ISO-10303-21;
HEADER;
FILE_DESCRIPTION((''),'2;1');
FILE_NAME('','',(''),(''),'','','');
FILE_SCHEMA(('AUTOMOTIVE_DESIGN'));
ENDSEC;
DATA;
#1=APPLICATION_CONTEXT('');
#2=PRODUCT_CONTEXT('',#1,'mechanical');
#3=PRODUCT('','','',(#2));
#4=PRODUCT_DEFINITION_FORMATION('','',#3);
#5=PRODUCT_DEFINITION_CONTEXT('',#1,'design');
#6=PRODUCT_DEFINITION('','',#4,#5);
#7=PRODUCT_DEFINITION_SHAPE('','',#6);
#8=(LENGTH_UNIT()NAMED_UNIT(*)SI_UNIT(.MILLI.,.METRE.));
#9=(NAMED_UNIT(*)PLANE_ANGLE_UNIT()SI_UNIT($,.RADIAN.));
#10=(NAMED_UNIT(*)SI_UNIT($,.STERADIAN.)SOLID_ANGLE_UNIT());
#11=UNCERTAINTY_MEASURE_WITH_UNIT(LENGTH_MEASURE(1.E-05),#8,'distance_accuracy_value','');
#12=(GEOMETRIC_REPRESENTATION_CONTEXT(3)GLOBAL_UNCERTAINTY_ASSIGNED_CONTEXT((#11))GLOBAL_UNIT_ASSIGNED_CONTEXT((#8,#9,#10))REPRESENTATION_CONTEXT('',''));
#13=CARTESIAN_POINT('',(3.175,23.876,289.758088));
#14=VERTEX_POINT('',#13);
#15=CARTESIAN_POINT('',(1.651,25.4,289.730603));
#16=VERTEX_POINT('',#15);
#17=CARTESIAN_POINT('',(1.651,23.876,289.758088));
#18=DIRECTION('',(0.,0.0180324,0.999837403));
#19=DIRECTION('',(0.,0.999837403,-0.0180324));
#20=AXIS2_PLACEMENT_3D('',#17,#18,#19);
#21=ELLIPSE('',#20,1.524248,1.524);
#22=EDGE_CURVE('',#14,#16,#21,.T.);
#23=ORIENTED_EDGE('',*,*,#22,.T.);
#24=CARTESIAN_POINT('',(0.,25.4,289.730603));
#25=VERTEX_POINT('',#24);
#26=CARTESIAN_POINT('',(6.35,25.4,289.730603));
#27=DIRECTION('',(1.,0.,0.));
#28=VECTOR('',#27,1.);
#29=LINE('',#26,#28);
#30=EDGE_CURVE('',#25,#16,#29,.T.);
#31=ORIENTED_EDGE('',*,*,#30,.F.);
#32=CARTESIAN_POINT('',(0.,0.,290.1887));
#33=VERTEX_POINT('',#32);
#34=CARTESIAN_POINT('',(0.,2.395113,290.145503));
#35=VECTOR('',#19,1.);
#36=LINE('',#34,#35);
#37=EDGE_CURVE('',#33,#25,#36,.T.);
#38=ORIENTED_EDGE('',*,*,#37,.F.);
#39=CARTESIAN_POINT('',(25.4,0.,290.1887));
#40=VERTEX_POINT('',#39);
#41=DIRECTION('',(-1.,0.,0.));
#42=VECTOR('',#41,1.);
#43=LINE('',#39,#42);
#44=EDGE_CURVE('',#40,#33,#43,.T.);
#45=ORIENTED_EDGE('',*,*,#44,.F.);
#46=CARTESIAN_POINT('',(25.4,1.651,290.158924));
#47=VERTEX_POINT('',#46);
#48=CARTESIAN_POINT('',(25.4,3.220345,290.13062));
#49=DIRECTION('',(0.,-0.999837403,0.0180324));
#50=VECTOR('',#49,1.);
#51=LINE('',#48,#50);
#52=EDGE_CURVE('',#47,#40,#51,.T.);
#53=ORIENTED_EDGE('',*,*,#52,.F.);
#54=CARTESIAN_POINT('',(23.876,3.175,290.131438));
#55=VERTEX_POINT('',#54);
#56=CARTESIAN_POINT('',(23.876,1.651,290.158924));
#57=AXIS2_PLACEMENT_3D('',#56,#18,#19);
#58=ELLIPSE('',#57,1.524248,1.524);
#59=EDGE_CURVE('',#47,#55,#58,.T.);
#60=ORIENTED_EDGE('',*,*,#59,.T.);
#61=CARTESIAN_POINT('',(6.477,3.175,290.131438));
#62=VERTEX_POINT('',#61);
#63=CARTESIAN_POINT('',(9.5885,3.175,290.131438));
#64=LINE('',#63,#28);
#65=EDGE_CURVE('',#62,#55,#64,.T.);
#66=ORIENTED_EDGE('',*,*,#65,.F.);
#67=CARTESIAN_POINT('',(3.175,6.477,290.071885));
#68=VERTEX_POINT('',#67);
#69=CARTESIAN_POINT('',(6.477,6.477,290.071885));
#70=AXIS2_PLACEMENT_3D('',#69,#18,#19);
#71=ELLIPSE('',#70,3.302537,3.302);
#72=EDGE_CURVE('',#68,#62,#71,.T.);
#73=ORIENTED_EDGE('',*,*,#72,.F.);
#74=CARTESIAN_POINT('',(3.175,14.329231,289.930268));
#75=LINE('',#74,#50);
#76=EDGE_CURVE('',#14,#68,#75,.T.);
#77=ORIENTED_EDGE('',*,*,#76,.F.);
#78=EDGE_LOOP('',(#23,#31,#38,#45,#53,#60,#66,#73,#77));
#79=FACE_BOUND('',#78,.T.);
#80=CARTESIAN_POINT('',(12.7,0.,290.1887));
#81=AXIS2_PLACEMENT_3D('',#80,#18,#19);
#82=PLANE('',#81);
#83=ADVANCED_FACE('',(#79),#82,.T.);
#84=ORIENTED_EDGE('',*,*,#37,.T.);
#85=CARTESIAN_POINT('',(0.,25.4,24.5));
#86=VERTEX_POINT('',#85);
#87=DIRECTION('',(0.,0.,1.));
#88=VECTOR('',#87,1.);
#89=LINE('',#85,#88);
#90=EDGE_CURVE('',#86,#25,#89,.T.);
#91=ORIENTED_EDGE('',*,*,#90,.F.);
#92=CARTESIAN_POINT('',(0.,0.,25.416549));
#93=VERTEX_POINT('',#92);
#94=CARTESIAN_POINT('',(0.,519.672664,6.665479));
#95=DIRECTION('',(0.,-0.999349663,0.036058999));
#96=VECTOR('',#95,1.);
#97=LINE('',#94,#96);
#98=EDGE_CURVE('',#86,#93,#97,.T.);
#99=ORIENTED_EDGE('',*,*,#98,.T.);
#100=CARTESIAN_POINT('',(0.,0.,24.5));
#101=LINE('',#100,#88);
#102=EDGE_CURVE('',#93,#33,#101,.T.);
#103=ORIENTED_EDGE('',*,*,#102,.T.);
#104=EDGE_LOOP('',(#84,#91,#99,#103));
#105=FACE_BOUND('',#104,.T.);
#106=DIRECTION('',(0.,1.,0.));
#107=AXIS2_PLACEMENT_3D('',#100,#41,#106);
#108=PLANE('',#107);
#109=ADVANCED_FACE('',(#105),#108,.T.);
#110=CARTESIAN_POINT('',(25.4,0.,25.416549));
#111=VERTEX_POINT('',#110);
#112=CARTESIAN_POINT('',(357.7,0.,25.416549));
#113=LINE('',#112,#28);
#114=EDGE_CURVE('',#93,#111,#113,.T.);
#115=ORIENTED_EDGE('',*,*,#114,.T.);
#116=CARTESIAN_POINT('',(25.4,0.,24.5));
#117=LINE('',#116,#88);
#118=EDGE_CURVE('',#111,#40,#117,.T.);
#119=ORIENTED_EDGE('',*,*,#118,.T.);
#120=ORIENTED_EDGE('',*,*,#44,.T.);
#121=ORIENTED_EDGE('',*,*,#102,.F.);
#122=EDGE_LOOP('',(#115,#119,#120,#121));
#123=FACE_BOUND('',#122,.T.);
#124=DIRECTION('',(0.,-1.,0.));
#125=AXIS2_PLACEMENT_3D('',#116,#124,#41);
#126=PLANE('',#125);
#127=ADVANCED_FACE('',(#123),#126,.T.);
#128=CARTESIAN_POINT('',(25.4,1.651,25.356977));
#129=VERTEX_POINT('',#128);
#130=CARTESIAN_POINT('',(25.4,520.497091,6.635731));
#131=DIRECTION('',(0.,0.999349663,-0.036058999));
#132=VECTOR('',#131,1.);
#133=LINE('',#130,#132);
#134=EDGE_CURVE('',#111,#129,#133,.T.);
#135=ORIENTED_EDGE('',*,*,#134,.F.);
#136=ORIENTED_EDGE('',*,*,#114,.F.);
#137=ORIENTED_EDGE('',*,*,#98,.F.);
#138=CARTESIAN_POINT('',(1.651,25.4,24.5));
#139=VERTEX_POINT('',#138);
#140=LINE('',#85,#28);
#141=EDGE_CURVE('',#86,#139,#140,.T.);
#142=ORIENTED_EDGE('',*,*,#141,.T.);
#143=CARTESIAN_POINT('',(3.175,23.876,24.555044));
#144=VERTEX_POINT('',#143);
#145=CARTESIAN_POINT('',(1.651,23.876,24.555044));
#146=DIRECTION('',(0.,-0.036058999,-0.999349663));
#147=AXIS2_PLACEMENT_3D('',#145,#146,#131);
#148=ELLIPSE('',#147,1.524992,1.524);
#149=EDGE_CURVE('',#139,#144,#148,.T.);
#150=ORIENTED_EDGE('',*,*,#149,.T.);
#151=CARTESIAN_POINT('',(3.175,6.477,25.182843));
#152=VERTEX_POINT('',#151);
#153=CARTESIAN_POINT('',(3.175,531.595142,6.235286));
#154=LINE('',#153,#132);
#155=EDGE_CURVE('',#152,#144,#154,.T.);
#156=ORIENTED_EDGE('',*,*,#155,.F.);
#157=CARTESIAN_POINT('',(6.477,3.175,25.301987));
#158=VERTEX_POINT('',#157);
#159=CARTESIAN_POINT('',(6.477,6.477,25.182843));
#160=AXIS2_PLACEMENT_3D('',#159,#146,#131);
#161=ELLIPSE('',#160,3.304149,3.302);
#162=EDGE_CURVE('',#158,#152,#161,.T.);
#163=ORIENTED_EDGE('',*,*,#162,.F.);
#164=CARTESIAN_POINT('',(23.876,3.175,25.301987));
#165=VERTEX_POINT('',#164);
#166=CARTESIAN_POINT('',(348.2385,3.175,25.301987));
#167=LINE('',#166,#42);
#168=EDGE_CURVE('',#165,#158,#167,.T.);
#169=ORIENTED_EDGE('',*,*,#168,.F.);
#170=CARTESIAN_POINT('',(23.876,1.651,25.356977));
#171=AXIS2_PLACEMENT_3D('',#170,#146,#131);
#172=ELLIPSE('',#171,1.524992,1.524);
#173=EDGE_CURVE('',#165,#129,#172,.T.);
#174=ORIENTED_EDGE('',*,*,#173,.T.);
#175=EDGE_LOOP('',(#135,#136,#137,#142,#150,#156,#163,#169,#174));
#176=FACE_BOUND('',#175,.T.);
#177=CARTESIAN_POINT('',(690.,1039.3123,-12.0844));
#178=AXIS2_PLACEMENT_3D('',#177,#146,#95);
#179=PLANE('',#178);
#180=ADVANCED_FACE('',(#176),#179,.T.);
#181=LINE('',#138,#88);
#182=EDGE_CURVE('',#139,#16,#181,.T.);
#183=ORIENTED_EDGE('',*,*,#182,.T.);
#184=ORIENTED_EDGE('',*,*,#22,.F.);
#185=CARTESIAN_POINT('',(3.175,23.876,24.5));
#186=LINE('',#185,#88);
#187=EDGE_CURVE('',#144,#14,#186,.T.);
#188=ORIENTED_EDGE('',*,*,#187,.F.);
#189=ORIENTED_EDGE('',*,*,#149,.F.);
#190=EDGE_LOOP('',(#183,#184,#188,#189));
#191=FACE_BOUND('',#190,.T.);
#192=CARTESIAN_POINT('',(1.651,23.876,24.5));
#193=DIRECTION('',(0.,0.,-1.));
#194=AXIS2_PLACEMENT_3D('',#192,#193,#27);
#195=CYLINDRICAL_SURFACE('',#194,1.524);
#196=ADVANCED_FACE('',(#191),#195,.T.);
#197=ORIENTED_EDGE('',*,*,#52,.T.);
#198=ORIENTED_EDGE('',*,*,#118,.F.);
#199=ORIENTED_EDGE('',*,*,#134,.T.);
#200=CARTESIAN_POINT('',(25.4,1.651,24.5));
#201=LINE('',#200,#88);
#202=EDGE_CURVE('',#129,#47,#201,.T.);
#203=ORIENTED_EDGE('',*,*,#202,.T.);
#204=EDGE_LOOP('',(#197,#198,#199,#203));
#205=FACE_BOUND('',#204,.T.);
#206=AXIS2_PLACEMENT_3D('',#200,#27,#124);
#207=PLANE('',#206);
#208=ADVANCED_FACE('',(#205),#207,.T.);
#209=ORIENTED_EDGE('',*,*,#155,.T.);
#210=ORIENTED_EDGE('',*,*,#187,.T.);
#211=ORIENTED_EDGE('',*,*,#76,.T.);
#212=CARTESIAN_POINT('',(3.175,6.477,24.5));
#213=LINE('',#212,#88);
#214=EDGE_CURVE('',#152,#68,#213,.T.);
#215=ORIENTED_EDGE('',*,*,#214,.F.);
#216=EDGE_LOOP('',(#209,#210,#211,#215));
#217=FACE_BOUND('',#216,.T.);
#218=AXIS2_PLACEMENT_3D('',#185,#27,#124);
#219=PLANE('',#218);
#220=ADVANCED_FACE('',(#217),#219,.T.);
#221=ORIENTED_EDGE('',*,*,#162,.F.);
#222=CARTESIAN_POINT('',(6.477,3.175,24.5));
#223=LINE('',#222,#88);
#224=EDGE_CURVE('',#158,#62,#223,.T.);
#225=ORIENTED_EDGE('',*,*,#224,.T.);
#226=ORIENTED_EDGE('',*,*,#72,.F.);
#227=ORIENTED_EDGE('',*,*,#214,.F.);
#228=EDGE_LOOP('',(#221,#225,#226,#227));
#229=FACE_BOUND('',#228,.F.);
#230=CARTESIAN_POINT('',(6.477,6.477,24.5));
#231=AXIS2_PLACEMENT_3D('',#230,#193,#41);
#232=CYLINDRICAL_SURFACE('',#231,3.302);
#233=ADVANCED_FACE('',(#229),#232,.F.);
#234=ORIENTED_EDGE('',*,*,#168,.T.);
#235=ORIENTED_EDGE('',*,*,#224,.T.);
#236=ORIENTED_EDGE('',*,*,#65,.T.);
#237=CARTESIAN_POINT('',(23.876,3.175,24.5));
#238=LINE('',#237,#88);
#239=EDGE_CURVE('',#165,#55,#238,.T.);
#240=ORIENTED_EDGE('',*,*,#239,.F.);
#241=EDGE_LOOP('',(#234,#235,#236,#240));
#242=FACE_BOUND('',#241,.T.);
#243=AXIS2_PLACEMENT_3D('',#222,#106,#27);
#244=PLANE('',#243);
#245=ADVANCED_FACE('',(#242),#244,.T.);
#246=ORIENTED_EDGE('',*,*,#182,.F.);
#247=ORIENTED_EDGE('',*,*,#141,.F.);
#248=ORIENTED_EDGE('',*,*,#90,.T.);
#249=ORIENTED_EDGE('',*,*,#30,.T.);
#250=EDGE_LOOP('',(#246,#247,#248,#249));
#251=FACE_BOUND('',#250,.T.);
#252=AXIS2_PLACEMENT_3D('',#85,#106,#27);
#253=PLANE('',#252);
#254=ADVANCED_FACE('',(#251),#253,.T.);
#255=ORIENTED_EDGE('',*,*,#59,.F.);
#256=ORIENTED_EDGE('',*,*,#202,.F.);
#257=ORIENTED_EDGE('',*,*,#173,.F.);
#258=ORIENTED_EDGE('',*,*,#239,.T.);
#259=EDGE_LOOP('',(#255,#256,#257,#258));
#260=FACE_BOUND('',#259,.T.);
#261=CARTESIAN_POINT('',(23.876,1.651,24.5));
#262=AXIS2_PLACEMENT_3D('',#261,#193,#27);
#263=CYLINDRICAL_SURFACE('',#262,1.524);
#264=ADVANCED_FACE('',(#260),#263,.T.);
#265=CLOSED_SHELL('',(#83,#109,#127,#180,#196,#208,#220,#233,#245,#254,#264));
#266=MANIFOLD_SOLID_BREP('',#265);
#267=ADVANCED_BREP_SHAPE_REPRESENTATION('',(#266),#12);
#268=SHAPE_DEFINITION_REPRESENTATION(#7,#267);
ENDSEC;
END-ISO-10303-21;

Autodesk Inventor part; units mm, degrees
ref_plane "Start Plane" through (0, 0, 24.5) normal (0, 0, 1) x (1, 0, 0)
ref_plane "End Plane" through (0, 0, 290.1887) normal (0, 0, 1) x (1, 0, 0)
sketch "Sketch" plane through (0, 0, 0) normal (0, 0, 1) x (1, 0, 0)
  line L0 (25.4, 0) -> (0, 0)
  line L1 (0, 0) -> (0, 25.4)
  line L2 (0, 25.4) -> (1.651, 25.4)
  line L3 (3.175, 23.876) -> (3.175, 6.477)
  line L4 (6.477, 3.175) -> (23.876, 3.175)
  line L5 (25.4, 1.651) -> (25.4, 0)
  line L6 (0, -11.0414) -> (0, 31.5385) construction
  line L7 (-11.0414, 0) -> (31.5385, 0) construction
  arc A0 (3.175, 6.477) -> (6.477, 3.175) centre (6.477, 6.477) ccw
  arc A1 (3.175, 23.876) -> (1.651, 25.4) centre (1.651, 23.876) ccw
  arc A2 (25.4, 1.651) -> (23.876, 3.175) centre (23.876, 1.651) ccw
  line L8 (0, 40.0545) -> (0, -19.5574) construction
  line L9 (-19.5574, 0) -> (40.0545, 0) construction
  point P0 (3.175, 25.4)
  point P1 (3.175, 3.175)
  point P2 (25.4, 3.175)
  dimension "d0" = 25.4
  dimension "d1" = 25.4
  dimension "d2" = 3.175
  dimension "d3" = 3.175
  dimension "d10" = 0
  dimension "d11" = 0
  dimension "d14" = 3.302
  dimension "d15" = 1.524
extrude "Body" add sketch "Sketch" along normal up to surface (265.6887 mm away) from surface at 24.5
sketch "Sketch3" plane through (0, 0, 0) normal (0, 0, 1) x (1, 0, 0)
  line L0 (0, 0) -> (10, 0)
ref_plane "Work Plane3" through (0, 0, 0) normal (0, -1, 0) x (1, 0, 0)
ref_plane "Work Plane4" through (12.7, 0, 290.1887) normal (0, 0.0180324, 0.9998374) x (1, 0, 0)
split "Split1" plane through (12.7, 0, 290.1887) removes the side toward (0, 0.0180324, 0.9998374)
ref_plane "Work Plane9" through (690, 1039.3123, -12.0844) normal (0, -0.036059, -0.9993497) x (1, 0, 0)
split "Split3" plane through (690, 1039.3123, -12.0844) removes the side toward (0, -0.036059, -0.9993497)
sketch "Sketch4" plane through (0, 0, 0) normal (0, -1, 0) x (1, 0, 0)
  line L0 (-2, 24.5) -> (12, 24.5) projected
  line L1 (-2, 290.1887) -> (12, 290.1887) projected
  dimension "d17" = 265.6887
equation "\"d0\" = G_H"
equation "\"d1\" = G_H"
equation "\"d2\" = G_T"
equation "\"d3\" = G_T"
equation "\"d14\" = G_IR"
equation "\"d15\" = G_ER"
equation "\"d4\" = G_L"
equation "\"G_H\" = 25.4"
equation "\"G_T\" = 3.175"
equation "\"G_ER\" = 1.524"
equation "\"G_IR\" = 3.302"
equation "\"G_L\" = 265.68959"
equation "\"ex\" = 0"
equation "\"G_OFFSET_START\" = -24.50003"
equation "\"G_OFFSET_END\" = 0"
equation "\"d12\" = -G_OFFSET_START"
equation "\"d13\" = G_OFFSET_END + B_L"
equation "\"B_L\" = 290.18872"
properties part number "AISC - L 1 x 1 x 1/8 - 10.46" material "Steel, Mild"
